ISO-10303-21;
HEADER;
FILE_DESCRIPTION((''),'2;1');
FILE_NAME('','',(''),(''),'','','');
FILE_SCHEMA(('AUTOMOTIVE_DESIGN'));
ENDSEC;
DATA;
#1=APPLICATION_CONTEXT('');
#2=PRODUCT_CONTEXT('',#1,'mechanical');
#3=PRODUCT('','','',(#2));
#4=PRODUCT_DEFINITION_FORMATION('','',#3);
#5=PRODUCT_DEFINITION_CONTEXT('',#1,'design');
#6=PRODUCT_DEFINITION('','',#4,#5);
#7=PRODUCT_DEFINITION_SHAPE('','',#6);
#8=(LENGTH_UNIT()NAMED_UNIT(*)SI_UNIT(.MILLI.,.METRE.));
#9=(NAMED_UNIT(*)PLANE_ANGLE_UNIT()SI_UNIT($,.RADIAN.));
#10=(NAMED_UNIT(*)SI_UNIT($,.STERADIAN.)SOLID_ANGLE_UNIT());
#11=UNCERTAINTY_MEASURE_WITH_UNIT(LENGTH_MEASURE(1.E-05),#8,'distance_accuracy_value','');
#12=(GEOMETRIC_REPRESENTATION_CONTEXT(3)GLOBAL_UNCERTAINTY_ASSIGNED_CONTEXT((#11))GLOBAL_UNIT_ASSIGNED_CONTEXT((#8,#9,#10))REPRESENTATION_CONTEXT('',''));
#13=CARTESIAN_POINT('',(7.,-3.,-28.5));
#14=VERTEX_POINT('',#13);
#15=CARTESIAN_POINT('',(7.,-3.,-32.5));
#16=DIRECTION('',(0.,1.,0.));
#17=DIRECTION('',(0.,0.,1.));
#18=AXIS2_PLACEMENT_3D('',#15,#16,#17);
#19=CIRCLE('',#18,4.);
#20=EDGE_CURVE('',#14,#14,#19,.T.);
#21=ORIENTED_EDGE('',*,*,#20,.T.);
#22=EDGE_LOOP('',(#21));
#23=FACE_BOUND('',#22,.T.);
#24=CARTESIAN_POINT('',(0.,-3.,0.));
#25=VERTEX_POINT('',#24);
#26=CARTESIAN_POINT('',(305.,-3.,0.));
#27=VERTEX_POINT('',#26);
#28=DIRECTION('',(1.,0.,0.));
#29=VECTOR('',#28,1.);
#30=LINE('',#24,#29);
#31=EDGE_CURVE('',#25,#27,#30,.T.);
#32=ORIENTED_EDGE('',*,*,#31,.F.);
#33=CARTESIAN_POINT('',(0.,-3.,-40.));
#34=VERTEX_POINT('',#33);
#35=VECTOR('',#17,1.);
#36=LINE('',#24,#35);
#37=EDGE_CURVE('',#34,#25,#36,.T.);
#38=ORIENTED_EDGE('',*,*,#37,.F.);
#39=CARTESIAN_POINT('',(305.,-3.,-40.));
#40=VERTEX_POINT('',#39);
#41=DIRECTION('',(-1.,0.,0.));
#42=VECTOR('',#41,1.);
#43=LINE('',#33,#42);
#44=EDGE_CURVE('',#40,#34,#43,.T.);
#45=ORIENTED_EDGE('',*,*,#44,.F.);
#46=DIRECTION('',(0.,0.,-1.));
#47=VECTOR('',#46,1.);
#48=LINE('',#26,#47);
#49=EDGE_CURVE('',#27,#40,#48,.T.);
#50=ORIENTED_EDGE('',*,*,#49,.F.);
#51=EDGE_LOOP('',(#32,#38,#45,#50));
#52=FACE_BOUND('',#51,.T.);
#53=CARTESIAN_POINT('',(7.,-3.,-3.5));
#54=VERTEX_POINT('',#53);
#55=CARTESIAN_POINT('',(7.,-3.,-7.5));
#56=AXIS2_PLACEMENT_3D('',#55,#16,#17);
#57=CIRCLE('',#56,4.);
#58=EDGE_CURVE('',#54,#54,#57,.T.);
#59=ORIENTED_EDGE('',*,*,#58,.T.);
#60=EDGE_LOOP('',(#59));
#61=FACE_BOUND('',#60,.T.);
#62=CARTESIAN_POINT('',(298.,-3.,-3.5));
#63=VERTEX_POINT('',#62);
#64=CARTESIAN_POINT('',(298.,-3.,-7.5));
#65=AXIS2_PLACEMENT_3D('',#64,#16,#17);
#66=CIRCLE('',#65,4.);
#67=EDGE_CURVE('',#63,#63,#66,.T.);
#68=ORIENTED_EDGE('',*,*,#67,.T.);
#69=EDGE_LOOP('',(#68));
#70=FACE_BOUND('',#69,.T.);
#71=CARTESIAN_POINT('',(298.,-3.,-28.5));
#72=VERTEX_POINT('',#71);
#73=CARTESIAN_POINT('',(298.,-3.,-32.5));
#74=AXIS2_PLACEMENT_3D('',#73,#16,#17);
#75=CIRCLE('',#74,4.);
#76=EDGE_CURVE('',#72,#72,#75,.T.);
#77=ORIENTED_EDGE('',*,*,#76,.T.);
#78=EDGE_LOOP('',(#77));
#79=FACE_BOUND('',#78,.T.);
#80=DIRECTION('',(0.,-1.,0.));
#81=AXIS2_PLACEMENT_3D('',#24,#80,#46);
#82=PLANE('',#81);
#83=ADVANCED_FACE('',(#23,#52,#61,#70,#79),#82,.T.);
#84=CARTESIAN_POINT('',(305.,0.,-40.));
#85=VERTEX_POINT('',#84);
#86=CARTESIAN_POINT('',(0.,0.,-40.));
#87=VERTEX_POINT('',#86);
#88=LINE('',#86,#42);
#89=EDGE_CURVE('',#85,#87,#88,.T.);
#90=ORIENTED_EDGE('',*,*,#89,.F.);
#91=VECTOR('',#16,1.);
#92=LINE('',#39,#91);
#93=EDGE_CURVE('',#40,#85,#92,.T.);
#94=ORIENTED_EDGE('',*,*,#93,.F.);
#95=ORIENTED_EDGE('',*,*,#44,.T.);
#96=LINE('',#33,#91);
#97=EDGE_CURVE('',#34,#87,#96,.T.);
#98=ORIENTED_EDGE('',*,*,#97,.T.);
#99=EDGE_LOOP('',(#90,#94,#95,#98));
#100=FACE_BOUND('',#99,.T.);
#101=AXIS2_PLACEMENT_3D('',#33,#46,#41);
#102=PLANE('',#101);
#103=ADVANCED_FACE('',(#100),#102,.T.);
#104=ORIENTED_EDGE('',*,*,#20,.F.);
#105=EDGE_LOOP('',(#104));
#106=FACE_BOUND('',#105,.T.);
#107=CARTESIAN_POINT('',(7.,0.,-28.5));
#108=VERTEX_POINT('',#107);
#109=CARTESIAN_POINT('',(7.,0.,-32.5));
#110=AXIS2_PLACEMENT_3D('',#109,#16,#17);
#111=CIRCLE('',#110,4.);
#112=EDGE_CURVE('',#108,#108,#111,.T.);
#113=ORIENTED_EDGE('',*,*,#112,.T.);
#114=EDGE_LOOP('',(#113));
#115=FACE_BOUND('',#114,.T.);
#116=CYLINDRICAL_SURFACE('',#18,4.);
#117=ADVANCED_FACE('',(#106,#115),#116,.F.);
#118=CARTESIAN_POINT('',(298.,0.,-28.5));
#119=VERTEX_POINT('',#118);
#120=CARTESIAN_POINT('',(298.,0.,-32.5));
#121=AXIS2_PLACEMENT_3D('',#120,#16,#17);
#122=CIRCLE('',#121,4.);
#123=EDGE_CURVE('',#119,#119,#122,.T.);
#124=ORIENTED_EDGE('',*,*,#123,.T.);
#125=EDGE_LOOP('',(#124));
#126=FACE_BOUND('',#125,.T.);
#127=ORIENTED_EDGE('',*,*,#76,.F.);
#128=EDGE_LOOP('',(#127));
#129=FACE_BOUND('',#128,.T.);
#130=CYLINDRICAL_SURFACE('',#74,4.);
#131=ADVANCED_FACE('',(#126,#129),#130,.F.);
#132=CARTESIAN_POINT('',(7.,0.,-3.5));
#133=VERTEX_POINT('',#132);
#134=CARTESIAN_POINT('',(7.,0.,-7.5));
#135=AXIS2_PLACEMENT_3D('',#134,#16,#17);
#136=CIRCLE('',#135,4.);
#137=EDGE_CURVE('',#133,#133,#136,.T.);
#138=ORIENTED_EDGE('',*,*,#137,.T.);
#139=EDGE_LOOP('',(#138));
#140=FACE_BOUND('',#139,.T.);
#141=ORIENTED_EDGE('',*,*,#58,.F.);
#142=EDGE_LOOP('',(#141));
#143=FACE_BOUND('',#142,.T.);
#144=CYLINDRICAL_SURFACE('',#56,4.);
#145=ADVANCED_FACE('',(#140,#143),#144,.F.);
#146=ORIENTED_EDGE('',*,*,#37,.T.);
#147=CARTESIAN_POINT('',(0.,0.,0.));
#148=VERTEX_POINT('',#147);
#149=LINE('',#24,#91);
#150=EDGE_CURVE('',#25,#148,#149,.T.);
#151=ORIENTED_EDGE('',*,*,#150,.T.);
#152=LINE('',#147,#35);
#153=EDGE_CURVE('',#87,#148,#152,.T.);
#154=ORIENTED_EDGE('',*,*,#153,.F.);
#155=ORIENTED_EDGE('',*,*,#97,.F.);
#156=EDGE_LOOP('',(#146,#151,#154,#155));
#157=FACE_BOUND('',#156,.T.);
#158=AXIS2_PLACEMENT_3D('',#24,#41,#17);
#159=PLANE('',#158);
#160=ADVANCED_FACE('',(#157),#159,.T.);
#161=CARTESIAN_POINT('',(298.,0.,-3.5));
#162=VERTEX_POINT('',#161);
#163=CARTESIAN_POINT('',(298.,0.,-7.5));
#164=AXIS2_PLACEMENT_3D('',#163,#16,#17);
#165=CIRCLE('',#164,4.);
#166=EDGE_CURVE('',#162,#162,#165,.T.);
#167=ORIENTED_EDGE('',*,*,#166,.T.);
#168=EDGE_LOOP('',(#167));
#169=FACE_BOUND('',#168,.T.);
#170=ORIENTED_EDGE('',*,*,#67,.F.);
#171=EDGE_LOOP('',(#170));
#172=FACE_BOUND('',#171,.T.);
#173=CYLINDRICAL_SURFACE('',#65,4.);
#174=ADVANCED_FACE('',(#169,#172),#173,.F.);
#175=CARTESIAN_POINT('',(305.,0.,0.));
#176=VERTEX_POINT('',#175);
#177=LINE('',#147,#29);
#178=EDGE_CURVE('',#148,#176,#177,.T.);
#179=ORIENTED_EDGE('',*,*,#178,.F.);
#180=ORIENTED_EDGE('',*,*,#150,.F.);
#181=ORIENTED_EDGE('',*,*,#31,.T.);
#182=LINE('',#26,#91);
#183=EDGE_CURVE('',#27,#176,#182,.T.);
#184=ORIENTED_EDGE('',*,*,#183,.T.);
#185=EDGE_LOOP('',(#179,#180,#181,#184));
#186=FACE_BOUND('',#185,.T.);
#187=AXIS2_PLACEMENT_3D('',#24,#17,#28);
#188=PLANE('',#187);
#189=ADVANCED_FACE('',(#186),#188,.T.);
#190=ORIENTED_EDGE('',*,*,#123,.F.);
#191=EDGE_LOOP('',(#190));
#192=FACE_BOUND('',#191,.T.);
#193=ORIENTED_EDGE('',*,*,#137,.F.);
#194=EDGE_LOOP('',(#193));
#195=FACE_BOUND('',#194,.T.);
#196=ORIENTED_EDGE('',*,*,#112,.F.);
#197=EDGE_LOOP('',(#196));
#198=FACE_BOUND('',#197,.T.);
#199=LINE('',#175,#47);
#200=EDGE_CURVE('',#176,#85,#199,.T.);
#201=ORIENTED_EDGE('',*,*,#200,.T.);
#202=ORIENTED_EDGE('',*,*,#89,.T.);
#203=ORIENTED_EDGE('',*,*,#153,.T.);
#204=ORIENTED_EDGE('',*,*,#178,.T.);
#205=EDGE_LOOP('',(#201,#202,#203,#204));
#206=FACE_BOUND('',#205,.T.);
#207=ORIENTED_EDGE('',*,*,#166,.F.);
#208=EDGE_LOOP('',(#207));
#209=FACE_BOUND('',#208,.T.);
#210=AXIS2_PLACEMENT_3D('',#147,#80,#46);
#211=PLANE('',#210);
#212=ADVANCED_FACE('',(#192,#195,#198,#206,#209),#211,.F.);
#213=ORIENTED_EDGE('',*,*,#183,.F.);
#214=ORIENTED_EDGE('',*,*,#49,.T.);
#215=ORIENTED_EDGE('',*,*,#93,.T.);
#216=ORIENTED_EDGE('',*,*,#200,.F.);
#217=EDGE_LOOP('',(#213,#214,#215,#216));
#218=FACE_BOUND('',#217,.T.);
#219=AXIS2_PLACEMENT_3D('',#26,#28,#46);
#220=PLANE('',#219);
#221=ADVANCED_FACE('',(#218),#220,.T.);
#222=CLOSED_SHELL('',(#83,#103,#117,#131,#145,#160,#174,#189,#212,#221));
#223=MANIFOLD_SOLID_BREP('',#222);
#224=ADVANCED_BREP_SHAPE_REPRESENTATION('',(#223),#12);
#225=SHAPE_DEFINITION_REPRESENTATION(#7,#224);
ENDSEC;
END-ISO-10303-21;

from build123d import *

# Parameters (mm, degrees)
SKETCH1_W          = 305
SKETCH1_H          = 40
SKETCH1_R          = 4
BASE_FLANGE1_DEPTH = 3


# Sheet-metal steps are written as plain solids
with BuildPart() as part:
    # Sketch1 → Base-Flange1 (new body)
    with BuildSketch(Plane(origin=(0, 0, 0), x_dir=(1, 0, 0), z_dir=(0, 1, 0))):
        with Locations((152.5, 20)):
            Rectangle(SKETCH1_W, SKETCH1_H)
        with Locations(Location((7, 32.5, 0), (0, 0, 270))):
            Circle(SKETCH1_R, mode=Mode.SUBTRACT)
        with Locations(Location((7, 7.5, 0), (0, 0, 270))):
            Circle(SKETCH1_R, mode=Mode.SUBTRACT)
        with Locations(Location((298, 32.5, 0), (0, 0, 270))):
            Circle(SKETCH1_R, mode=Mode.SUBTRACT)
        with Locations(Location((298, 7.5, 0), (0, 0, 270))):
            Circle(SKETCH1_R, mode=Mode.SUBTRACT)
    extrude(amount=-BASE_FLANGE1_DEPTH)


solid = part.part
